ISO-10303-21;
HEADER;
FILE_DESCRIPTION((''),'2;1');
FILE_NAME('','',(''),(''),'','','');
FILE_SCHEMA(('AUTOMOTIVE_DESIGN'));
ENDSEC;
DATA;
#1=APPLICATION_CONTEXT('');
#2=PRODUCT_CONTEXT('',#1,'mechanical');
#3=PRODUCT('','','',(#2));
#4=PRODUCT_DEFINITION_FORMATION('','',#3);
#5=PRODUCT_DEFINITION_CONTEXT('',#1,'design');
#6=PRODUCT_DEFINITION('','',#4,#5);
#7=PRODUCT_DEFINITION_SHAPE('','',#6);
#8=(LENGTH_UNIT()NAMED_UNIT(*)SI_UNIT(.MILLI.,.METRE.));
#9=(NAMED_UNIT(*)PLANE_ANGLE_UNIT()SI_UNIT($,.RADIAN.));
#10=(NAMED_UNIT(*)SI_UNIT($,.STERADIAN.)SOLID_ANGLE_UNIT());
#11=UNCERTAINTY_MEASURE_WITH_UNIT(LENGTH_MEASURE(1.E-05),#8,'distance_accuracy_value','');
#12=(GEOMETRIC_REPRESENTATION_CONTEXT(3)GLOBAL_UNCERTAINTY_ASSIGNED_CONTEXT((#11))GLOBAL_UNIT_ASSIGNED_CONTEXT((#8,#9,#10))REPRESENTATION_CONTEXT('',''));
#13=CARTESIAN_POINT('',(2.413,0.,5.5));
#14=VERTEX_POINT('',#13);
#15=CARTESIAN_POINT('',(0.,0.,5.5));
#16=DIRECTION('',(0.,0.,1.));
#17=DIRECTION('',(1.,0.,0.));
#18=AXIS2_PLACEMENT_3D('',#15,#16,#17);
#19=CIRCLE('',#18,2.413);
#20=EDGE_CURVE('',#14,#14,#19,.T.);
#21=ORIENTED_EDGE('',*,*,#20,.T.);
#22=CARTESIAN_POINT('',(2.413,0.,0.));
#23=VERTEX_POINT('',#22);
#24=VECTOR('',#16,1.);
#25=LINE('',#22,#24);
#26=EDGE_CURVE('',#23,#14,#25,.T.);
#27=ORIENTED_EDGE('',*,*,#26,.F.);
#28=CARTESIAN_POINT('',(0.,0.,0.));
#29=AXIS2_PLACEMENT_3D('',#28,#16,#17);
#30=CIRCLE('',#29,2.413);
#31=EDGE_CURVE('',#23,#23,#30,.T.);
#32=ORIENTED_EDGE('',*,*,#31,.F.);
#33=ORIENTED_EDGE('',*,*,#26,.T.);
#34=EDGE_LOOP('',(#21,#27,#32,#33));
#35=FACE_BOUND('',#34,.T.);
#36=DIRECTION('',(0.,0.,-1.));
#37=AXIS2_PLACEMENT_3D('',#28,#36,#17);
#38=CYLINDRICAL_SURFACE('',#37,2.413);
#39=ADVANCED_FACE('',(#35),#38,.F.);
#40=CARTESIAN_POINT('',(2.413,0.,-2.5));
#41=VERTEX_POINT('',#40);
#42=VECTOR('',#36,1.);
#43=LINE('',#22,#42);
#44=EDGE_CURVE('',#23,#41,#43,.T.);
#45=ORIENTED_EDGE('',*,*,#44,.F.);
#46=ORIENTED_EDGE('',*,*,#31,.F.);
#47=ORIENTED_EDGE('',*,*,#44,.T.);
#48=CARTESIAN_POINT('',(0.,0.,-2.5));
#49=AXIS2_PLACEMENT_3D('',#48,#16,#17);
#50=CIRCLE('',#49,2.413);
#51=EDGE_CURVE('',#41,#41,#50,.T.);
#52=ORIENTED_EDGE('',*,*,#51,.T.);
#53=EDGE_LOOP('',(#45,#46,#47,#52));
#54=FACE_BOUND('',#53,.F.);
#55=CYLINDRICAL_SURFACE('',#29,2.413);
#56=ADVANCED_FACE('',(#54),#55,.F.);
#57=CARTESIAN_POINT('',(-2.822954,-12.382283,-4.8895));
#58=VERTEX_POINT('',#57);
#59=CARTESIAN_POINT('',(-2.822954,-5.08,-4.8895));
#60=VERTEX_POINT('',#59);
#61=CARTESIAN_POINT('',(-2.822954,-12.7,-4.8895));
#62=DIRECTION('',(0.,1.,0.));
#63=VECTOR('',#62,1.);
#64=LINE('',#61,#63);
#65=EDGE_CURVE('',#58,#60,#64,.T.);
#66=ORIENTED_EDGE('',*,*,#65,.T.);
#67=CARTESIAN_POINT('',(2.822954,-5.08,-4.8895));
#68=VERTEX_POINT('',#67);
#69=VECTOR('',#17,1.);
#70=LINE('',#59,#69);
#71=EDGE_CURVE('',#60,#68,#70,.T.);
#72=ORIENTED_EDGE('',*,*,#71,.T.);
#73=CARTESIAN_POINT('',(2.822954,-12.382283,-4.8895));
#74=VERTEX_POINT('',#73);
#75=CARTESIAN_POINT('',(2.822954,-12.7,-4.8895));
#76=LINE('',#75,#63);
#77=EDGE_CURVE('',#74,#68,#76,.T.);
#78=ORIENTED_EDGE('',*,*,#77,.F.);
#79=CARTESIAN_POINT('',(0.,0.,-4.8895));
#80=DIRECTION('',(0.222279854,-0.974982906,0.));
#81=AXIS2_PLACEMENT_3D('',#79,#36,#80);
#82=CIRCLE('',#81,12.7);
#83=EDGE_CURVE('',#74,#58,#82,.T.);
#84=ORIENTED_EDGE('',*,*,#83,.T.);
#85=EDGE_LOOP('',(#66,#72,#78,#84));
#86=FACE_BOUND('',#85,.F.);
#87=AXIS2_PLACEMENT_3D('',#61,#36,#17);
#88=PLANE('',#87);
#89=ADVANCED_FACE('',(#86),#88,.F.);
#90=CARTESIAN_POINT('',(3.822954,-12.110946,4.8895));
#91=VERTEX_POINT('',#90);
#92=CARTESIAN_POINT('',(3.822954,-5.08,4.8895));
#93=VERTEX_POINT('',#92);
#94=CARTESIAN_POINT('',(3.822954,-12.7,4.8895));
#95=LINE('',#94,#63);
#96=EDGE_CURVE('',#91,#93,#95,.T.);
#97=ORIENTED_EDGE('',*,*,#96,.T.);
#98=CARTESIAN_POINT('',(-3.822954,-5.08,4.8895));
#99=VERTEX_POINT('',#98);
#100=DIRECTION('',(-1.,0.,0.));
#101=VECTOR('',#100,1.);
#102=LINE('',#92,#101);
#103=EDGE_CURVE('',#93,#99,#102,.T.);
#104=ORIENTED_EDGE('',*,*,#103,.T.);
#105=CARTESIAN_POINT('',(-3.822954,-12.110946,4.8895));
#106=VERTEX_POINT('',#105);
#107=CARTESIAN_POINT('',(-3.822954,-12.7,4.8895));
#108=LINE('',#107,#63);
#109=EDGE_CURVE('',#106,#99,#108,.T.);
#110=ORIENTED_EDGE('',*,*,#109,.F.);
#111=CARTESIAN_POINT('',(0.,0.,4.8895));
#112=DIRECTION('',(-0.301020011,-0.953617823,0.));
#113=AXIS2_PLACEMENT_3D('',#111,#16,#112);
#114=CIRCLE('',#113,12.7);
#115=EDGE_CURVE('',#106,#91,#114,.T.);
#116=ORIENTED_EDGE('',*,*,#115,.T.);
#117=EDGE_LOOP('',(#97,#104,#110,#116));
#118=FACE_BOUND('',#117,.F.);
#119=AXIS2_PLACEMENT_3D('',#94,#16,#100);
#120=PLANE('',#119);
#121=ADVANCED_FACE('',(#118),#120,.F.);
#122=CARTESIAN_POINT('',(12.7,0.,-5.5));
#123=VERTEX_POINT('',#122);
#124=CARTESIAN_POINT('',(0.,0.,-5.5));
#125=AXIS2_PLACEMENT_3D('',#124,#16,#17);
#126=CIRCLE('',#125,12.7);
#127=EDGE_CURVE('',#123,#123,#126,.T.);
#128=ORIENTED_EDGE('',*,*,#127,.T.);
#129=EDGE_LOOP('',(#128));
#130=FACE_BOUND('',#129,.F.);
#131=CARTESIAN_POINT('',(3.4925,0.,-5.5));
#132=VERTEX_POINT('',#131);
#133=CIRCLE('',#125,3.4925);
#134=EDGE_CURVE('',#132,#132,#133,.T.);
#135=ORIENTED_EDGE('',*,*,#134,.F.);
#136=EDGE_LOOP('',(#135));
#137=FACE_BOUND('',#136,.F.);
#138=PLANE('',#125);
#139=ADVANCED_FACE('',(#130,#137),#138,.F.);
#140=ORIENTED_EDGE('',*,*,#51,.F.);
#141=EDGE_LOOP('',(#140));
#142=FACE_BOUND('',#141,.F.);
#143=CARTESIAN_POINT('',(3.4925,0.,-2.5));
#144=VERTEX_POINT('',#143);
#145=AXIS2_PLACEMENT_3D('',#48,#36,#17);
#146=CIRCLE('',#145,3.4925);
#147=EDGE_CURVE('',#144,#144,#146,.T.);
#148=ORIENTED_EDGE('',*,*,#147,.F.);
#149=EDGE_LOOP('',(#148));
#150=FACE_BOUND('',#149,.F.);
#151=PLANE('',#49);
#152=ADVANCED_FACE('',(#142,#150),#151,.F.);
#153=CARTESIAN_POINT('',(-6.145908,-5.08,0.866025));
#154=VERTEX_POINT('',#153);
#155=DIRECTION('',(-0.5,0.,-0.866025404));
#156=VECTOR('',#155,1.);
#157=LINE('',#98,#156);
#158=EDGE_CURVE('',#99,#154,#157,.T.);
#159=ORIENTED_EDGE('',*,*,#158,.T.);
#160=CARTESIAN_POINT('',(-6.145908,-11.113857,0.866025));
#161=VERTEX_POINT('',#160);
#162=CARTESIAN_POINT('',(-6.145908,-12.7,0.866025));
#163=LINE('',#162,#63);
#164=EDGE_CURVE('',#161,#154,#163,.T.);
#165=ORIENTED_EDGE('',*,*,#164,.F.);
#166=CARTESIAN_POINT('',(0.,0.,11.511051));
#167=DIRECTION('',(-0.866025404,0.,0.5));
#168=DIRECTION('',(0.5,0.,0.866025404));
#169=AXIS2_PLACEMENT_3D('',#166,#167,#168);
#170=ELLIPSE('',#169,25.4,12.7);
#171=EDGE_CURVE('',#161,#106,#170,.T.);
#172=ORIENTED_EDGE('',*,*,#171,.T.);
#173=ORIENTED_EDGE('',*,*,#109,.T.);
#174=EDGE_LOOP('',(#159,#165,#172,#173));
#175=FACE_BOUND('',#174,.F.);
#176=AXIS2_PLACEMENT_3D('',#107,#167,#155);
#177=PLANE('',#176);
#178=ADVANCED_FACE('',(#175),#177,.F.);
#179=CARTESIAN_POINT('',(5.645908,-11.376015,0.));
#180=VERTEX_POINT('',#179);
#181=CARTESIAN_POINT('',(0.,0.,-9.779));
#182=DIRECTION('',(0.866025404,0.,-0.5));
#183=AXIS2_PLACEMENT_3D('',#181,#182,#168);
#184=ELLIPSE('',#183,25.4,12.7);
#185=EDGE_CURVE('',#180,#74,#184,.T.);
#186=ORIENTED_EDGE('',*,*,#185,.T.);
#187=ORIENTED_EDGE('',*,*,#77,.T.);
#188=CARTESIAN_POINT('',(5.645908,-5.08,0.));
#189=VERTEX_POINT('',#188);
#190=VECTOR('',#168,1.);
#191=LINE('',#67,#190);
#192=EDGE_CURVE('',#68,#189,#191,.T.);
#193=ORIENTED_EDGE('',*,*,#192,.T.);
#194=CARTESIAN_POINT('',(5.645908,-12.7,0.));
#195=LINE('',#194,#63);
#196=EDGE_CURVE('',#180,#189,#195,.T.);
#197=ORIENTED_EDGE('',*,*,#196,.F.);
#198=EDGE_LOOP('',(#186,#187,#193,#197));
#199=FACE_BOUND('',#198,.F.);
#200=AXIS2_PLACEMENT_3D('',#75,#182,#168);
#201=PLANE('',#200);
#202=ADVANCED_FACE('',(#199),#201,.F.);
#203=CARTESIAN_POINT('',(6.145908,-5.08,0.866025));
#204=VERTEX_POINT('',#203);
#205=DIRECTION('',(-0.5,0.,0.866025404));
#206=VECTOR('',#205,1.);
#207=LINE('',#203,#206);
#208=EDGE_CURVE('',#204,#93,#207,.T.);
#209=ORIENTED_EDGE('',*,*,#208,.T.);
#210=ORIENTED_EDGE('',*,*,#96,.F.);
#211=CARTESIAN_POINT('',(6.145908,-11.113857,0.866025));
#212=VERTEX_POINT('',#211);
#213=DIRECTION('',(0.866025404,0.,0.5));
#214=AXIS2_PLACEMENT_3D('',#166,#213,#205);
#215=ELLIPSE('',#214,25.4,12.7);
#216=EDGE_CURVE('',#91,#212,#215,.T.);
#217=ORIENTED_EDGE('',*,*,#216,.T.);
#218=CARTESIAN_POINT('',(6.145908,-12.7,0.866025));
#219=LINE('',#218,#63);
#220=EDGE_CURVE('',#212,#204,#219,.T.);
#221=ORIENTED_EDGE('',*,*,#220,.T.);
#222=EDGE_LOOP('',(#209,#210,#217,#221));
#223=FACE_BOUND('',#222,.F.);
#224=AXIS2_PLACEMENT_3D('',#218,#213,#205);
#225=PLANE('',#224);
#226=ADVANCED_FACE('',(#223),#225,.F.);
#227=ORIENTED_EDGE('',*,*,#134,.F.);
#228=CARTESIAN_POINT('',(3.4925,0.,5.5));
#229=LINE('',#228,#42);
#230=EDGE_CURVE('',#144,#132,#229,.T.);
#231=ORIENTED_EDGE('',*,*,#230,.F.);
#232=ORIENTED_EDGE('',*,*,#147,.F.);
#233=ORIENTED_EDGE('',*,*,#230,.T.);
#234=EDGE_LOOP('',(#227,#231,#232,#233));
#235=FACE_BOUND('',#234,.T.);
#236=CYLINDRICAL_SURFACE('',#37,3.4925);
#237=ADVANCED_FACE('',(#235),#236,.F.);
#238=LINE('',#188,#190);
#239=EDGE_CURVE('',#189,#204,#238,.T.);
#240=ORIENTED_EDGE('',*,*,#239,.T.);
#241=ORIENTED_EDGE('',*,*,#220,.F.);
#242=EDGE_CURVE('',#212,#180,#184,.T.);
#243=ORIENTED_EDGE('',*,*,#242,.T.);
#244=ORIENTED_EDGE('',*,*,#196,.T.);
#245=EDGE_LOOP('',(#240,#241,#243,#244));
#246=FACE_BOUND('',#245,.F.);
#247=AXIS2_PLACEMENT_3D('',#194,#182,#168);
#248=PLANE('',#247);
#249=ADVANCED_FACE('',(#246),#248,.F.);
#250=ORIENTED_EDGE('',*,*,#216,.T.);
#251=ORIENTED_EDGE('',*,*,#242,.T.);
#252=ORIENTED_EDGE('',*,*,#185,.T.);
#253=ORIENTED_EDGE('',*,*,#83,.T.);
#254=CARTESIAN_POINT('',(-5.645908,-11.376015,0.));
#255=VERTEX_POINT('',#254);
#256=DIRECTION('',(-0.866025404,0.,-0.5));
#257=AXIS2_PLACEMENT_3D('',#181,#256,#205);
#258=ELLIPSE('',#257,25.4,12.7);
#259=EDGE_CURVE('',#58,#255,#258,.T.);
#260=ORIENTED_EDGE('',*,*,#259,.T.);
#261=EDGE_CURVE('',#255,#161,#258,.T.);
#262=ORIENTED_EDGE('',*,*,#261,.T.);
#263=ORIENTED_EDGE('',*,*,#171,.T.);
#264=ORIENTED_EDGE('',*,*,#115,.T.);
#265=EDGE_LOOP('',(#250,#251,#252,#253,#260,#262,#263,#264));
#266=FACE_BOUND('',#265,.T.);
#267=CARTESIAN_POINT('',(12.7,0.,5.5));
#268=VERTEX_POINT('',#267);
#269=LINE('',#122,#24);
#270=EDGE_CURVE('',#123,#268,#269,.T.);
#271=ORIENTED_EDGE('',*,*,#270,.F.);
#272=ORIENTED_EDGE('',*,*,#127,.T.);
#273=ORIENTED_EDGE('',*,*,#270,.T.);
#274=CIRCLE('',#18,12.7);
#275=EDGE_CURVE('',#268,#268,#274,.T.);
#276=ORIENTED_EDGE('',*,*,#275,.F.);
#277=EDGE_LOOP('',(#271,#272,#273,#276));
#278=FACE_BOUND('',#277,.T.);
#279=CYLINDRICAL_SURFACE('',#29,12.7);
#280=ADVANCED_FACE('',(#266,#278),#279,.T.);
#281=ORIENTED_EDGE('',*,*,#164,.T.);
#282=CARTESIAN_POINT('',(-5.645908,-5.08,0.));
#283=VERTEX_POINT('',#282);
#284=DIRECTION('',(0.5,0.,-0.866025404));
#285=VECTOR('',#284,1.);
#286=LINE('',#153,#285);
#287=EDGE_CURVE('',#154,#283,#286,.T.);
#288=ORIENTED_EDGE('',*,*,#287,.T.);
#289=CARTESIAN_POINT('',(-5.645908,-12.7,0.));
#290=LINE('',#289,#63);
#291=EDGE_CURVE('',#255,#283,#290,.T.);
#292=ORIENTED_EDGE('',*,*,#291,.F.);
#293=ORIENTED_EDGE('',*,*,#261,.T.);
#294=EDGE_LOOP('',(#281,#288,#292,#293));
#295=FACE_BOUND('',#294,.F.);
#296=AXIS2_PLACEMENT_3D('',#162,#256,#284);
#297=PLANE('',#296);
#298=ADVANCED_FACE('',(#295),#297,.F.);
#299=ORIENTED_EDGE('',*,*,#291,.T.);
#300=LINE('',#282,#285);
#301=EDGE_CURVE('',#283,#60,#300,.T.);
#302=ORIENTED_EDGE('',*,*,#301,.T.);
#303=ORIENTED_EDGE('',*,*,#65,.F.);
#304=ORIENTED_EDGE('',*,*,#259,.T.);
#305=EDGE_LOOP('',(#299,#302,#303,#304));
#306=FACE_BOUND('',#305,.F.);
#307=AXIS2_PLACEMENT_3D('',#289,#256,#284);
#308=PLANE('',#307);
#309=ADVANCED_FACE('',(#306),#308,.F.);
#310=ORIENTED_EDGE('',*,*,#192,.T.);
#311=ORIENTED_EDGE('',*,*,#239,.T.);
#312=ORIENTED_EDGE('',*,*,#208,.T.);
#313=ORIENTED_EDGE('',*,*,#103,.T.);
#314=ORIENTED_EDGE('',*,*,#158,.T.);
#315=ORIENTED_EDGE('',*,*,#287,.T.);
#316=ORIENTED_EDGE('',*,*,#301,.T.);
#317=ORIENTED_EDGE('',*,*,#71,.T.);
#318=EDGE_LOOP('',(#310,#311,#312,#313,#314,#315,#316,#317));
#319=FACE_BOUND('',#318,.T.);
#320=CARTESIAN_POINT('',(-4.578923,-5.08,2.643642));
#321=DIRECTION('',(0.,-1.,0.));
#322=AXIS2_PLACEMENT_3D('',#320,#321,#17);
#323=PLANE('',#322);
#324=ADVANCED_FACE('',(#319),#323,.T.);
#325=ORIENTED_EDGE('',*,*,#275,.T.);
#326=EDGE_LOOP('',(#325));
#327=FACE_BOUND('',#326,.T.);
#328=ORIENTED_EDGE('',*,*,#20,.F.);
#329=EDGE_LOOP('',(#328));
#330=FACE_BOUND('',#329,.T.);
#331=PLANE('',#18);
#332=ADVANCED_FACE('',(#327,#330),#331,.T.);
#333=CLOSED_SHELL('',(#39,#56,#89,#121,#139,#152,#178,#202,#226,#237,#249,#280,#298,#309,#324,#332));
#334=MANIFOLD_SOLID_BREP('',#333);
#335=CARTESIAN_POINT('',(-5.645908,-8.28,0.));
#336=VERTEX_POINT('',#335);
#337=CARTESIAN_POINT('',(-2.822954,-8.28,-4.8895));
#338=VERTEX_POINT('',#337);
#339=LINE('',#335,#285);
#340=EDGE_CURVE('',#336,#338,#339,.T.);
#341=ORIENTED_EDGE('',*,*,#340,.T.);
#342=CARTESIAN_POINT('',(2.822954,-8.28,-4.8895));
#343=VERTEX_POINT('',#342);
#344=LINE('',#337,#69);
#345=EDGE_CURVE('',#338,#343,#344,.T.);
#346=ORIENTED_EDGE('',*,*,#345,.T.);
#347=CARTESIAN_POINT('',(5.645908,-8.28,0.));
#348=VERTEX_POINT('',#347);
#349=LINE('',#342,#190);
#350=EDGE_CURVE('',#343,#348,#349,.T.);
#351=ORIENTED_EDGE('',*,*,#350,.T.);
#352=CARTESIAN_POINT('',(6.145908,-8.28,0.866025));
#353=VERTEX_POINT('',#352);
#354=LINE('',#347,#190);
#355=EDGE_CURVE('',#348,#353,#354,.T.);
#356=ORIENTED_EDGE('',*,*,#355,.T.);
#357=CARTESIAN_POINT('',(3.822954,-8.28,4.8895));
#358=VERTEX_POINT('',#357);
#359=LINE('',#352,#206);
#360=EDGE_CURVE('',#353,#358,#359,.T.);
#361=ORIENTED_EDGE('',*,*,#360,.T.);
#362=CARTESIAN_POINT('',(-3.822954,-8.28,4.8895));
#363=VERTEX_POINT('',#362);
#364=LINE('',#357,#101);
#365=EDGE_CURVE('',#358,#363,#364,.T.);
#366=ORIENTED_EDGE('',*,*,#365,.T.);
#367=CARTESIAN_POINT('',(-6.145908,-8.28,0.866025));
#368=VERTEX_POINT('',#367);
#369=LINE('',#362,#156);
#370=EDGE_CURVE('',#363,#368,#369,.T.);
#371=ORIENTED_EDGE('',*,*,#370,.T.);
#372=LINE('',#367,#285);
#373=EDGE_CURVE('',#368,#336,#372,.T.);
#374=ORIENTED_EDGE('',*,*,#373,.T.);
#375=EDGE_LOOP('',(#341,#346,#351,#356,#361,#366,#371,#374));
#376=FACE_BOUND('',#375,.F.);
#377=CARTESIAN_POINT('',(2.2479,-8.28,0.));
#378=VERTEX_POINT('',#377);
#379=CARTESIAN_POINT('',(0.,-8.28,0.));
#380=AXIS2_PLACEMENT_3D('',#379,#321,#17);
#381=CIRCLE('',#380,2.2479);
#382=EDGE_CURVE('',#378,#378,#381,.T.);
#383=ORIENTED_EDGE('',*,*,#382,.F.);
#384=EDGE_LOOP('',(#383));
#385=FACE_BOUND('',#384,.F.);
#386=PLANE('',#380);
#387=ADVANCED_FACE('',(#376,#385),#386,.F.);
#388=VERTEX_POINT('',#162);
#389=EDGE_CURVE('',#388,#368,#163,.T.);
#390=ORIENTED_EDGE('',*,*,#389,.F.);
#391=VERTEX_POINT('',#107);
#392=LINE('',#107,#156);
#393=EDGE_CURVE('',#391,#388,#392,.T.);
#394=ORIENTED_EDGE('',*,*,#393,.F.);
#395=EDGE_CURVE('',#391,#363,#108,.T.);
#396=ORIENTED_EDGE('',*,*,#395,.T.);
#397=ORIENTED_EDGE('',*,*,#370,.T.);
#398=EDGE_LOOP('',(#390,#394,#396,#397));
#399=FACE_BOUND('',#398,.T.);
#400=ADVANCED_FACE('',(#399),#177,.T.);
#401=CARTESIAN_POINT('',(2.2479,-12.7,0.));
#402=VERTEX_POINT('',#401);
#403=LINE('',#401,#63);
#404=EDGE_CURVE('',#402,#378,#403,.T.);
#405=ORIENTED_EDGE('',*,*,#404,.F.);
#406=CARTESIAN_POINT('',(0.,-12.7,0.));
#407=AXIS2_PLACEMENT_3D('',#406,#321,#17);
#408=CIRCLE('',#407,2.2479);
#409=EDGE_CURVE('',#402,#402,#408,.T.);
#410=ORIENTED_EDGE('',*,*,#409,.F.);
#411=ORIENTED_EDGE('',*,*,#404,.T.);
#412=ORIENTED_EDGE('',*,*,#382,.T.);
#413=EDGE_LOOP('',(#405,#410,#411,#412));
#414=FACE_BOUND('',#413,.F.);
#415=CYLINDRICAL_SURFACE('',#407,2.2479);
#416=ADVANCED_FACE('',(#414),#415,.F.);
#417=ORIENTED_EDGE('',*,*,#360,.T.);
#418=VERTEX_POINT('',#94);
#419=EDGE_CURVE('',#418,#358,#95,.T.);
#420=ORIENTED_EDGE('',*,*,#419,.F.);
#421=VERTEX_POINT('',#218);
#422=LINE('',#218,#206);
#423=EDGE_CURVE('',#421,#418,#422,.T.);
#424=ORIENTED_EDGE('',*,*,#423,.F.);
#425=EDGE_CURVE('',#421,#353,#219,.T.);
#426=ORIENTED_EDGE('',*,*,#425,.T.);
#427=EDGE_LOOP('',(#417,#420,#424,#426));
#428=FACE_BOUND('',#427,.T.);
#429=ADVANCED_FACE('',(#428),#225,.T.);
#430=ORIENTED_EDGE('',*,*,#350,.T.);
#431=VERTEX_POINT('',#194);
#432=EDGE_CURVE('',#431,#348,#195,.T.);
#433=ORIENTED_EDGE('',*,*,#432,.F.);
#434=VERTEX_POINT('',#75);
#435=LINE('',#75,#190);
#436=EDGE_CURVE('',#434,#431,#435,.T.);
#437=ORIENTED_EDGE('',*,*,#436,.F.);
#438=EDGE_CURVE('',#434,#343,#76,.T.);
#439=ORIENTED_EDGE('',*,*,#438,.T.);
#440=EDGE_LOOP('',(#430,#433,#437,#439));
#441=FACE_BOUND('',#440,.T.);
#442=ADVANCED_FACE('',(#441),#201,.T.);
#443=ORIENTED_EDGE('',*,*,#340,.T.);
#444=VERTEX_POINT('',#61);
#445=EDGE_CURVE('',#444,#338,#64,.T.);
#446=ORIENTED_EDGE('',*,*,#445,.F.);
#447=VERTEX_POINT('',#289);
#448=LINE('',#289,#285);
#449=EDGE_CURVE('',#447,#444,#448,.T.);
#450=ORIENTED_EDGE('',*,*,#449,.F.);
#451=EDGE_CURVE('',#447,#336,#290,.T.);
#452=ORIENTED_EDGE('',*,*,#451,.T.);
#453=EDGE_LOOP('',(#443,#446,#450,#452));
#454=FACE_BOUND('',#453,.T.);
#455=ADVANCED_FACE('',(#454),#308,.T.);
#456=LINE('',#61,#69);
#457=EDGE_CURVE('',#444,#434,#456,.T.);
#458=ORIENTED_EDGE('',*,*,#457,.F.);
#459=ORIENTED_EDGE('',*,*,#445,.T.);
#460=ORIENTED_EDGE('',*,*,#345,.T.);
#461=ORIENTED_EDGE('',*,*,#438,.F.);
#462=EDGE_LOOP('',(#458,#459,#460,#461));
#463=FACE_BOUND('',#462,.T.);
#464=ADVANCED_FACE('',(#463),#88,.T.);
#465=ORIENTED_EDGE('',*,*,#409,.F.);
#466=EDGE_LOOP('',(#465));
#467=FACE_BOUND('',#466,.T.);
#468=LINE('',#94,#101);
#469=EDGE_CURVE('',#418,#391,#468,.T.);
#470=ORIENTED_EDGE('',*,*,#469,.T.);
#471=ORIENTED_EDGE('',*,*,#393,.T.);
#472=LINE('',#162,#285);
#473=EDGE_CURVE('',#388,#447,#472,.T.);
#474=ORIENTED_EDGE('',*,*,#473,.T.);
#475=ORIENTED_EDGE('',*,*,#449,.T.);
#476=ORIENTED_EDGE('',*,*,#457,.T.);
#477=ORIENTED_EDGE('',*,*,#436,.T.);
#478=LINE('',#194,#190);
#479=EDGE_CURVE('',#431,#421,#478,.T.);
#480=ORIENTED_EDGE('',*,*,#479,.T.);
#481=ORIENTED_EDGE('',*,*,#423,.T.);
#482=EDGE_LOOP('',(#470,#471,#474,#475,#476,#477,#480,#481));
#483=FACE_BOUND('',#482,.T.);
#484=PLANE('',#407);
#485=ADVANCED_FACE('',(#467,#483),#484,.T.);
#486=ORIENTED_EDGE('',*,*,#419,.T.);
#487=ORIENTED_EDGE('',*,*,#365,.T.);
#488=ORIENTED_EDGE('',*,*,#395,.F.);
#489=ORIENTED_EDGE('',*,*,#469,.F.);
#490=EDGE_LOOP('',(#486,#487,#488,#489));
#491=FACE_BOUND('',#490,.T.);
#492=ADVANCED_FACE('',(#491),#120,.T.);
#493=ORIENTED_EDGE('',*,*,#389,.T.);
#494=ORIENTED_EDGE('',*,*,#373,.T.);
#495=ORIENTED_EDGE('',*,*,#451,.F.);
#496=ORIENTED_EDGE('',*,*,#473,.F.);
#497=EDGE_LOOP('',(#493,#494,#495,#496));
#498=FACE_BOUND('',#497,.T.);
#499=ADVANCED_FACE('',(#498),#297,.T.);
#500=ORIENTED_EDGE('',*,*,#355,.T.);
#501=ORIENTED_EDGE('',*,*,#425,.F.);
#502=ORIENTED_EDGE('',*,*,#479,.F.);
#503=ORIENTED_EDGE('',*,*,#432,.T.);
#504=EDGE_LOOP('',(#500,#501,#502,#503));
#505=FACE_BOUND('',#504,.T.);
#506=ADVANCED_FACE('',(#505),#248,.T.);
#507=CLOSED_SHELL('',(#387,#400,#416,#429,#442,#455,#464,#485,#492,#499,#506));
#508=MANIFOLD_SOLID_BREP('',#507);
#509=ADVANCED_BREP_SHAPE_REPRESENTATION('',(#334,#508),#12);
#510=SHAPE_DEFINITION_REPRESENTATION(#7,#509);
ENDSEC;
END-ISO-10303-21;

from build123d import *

# Parameters (mm, degrees)
F0_R           = 12.7
F0_R_2         = 3.4925
F1_DEPTH       = 5.5
F3_R           = 2.2479
F4_DEPTH       = 7.62
F6_DEPTH       = 7.62
F7_DEPTH       = 4.42
F8_DEPTH       = 12.7
F9_R           = 4.1894842837
F9_R_2         = 2.413
F10_DEPTH      = 5.5
F10_DEPTH_BACK = 2.5


with BuildPart() as f1:
    # F0 (on Top) → F1 (new body, symmetric)
    with BuildSketch(Plane.XY):
        Circle(F0_R)
        Circle(F0_R_2, mode=Mode.SUBTRACT)
    extrude(amount=F1_DEPTH, both=True)

    # F3 (on offset) → F4 (cut)
    with BuildSketch(Plane.XZ.offset(12.7)):
        Circle(F3_R)
    extrude(amount=-F4_DEPTH, mode=Mode.SUBTRACT)

    # F5 (on offset) → F6 (cut)
    with BuildSketch(Plane.XZ.offset(12.7)):
        Polygon((-6.1459082824, 0.8660254038), (-5.6459082824, 0), (-2.8229541412, 4.8895), (-3.8229541412, 4.8895), align=None)
        Polygon((-2.8229541412, -4.8895), (2.8229541412, -4.8895), (5.6459082824, 0), (2.8229541412, 4.8895), (-2.8229541412, 4.8895), (-5.6459082824, 0), align=None)
        Polygon((2.8229541412, 4.8895), (5.6459082824, 0), (6.1459082824, 0.8660254038), (3.8229541412, 4.8895), align=None)
    extrude(amount=-F6_DEPTH, mode=Mode.SUBTRACT)

    # F9 (on Top) → F10 (join, two sides)
    with BuildSketch(Plane.XY) as f10_sk:
        Circle(F9_R)
        Circle(F9_R_2, mode=Mode.SUBTRACT)
    extrude(amount=F10_DEPTH)
    extrude(f10_sk.sketch, amount=-F10_DEPTH_BACK)


with BuildPart() as f7:
    # F5 (on offset) → F7 (new body)
    with BuildSketch(Plane.XZ.offset(12.7)):
        Polygon((-2.8229541412, -4.8895), (2.8229541412, -4.8895), (5.6459082824, 0), (2.8229541412, 4.8895), (-2.8229541412, 4.8895), (-5.6459082824, 0), align=None)
        Polygon((2.8229541412, 4.8895), (5.6459082824, 0), (6.1459082824, 0.8660254038), (3.8229541412, 4.8895), align=None)
        Polygon((-6.1459082824, 0.8660254038), (-5.6459082824, 0), (-2.8229541412, 4.8895), (-3.8229541412, 4.8895), align=None)
    extrude(amount=-F7_DEPTH)

    # F3 (on offset) → F8 (cut)
    with BuildSketch(Plane.XZ.offset(12.7)):
        Circle(F3_R)
    extrude(amount=-F8_DEPTH, mode=Mode.SUBTRACT)


solid = Compound([f1.part, f7.part])
